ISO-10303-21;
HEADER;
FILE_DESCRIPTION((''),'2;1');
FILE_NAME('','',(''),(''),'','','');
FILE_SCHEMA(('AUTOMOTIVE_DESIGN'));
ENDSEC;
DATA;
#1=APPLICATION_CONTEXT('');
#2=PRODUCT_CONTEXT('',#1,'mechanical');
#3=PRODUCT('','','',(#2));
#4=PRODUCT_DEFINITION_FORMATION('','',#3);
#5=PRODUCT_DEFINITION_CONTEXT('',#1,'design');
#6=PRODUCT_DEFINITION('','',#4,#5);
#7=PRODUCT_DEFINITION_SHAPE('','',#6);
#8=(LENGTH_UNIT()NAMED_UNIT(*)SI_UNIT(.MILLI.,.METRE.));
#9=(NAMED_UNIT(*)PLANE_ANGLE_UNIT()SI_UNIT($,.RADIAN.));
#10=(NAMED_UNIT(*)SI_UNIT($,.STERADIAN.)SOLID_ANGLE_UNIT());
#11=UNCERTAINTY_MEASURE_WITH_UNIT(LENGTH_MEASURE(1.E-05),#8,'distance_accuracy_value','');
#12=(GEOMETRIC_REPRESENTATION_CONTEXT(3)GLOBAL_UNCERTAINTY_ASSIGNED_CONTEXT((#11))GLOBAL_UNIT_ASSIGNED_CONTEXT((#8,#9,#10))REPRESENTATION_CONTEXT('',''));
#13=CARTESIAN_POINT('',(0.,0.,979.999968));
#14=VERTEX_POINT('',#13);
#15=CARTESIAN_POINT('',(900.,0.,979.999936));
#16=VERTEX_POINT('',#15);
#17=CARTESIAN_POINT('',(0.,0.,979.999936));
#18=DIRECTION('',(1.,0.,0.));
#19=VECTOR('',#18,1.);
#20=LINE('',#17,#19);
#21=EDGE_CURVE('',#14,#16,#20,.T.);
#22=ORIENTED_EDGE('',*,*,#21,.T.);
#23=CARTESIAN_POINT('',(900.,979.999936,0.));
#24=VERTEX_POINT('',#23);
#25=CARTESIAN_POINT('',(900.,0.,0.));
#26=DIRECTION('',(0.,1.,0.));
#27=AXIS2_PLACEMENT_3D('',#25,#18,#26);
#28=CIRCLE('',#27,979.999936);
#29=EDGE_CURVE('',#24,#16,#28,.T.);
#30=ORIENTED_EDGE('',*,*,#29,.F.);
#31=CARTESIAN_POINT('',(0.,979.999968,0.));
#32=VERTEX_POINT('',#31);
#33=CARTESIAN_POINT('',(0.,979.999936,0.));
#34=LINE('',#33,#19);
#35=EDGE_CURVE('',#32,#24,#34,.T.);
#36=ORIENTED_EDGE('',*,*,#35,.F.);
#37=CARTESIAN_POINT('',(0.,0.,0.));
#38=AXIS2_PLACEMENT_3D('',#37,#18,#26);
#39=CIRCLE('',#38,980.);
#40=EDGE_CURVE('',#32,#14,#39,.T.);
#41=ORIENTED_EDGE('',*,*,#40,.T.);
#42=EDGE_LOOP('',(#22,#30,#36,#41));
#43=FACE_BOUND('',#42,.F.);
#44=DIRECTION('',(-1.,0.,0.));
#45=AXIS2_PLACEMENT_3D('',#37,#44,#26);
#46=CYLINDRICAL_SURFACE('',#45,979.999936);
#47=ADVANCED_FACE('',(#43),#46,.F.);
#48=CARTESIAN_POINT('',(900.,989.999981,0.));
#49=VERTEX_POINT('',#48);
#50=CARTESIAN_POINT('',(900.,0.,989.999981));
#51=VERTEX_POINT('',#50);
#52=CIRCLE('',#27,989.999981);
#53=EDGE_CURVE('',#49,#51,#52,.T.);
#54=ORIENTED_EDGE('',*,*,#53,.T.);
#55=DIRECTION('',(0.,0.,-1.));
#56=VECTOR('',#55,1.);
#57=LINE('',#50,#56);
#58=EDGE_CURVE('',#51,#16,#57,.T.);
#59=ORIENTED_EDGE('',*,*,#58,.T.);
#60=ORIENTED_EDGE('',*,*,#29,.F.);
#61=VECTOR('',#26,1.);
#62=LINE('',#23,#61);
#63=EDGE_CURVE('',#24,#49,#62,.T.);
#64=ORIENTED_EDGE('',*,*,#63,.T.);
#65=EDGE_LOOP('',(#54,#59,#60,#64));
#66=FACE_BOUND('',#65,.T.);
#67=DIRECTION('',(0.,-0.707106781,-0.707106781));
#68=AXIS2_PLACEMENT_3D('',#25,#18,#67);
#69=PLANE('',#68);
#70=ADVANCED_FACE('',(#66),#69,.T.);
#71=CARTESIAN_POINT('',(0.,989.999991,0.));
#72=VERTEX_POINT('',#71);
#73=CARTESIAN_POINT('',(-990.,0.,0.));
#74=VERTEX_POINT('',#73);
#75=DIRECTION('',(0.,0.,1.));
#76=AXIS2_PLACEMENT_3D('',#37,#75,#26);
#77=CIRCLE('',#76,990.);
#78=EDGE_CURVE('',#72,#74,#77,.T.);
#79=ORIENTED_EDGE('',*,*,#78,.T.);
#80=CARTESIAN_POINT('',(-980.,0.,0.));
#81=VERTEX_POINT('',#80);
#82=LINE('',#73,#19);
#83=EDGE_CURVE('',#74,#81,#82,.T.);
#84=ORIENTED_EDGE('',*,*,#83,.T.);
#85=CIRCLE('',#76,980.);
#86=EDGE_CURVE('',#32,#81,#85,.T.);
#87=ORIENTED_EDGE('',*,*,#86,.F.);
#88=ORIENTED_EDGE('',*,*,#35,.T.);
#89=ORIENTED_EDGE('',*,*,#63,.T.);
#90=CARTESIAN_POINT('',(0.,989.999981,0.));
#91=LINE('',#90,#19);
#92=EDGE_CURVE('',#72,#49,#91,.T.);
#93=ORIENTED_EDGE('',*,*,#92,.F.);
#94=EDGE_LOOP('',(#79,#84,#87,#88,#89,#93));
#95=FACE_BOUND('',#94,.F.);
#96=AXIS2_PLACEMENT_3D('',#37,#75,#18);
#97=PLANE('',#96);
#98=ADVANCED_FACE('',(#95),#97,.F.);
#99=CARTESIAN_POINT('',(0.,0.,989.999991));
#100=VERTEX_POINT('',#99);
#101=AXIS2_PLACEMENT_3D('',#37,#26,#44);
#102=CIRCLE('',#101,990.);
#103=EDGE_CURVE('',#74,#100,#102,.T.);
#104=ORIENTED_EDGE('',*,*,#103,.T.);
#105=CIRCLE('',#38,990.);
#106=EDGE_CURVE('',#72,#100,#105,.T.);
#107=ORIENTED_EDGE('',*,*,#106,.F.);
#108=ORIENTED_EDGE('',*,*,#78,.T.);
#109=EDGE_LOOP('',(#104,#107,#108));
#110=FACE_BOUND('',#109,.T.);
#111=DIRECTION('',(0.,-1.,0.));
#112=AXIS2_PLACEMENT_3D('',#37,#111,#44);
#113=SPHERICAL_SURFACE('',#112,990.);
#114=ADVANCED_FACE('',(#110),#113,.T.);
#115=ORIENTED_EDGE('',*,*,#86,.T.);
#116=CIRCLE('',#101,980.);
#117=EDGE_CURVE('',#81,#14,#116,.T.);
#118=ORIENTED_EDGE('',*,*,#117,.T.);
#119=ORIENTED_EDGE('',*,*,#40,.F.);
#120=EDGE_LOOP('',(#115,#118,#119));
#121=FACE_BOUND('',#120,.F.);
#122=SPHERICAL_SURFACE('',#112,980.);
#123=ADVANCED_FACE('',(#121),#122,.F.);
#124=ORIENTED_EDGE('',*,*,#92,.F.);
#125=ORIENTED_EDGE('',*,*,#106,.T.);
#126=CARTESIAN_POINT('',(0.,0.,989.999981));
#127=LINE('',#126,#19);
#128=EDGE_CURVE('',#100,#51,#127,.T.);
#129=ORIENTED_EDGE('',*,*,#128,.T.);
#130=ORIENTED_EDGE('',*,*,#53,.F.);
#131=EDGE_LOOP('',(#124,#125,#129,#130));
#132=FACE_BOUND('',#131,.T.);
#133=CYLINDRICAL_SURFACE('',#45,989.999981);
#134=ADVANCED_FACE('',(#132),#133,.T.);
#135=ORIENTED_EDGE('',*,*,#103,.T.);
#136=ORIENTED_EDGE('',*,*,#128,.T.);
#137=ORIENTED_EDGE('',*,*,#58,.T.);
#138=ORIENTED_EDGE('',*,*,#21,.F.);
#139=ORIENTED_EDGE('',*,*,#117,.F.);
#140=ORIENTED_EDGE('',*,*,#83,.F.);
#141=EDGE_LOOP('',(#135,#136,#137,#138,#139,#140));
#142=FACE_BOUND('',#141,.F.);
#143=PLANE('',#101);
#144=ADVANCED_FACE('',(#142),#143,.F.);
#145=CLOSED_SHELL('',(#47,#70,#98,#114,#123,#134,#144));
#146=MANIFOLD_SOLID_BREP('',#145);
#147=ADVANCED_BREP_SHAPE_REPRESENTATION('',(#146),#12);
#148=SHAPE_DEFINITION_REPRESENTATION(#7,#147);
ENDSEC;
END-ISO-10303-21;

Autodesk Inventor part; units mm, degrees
ref_plane "YZ Plane" through (0, 0, 0) normal (1, 0, 0) x (0, 1, 0)
ref_plane "XZ Plane" through (0, 0, 0) normal (0, 1, 0) x (-1, 0, 0)
ref_plane "XY Plane" through (0, 0, 0) normal (0, 0, 1) x (1, 0, 0)
sketch "Sketch1" plane through (0, 0, 0) normal (0, 0, 1) x (1, 0, 0)
  arc A0 (0, 990) -> (-990, 0) centre (0, 0) ccw
  arc A1 (0, 980) -> (-980, 0) centre (0, 0) ccw
  line L0 (-990, 0) -> (-980, 0)
  line L1 (0, 990) -> (0, 980)
  line L2 (0, -214.865) -> (0, 1289.19) projected
  dimension "d0" = 10
  dimension "d1" = 990
  dimension "d2" = 0
  dimension "d3" = 0
revolve "Revolution1" add sketch "Sketch1" angle 90 about axis through (0, -10, 0) along (0, 1, 0)
sketch "Sketch2" plane through (0, 0, 0) normal (1, 0, 0) x (0, -0.7071068, -0.7071068)
  arc A0 (-700.0357, 700.0357) -> (-700.0357, -700.0357) centre (0, 0) ccw projected
  arc A1 (-692.9646, 692.9646) -> (-692.9646, -692.9646) centre (0, 0) ccw projected
  line L0 (-692.9646, 692.9646) -> (-700.0357, 700.0357) projected
  line L1 (-700.0357, -700.0357) -> (-692.9646, -692.9646) projected
extrude "Extrusion2" add sketch "Sketch2" along normal blind 900
equation "\"d0\" = thickness"
equation "\"thickness\" = 10"
equation "\"hoop_angle_z\" = 45deg"
equation "\"hoop_bearing_length\" = 5deg"
equation "\"hoop_cable_diam\" = 5"
equation "\"hoop_cable_pulley_diam\" = 22"
equation "\"rack_tooth_addendum\" = 5"
equation "\"rack_tooth_dedendum\" = 5"
equation "\"rack_tooth_thickness\" = 5"
equation "\"secure_arm_angle\" = 20deg"
equation "\"secure_arm_hold_length\" = 35"
equation "\"secure_arm_radii\" = 9"
equation "\"support_baseClamp_platformLengthBuffer\" = 35"
equation "\"support_baseClamp_platformThickness\" = 15"
equation "\"support_baseClamp_platformWidthBuffer\" = 0"
equation "\"support_baseClamp_sleeveHoleDiameter\" = 12"
equation "\"support_baseClamp_sleeveSweepTerminationAngle\" = 55deg"
equation "\"support_baseClamp_thickness\" = 8"
equation "\"support_frame_endHoleBuffer\" = 25"
equation "\"support_frame_squareBarFillet\" = 2"
equation "\"support_frame_squareBarThickness\" = 5"
equation "\"hoop_tabs_thickness\" = 6"
equation "\"hoop_tabs_hole\" = 4"
equation "\"wheelchair_deployed_width\" = 635"
equation "\"wheelchair_deployed_length\" = 1067"
equation "\"wheelchair_deployed_height\" = 914"
properties part number "cover2_sule_inner"
